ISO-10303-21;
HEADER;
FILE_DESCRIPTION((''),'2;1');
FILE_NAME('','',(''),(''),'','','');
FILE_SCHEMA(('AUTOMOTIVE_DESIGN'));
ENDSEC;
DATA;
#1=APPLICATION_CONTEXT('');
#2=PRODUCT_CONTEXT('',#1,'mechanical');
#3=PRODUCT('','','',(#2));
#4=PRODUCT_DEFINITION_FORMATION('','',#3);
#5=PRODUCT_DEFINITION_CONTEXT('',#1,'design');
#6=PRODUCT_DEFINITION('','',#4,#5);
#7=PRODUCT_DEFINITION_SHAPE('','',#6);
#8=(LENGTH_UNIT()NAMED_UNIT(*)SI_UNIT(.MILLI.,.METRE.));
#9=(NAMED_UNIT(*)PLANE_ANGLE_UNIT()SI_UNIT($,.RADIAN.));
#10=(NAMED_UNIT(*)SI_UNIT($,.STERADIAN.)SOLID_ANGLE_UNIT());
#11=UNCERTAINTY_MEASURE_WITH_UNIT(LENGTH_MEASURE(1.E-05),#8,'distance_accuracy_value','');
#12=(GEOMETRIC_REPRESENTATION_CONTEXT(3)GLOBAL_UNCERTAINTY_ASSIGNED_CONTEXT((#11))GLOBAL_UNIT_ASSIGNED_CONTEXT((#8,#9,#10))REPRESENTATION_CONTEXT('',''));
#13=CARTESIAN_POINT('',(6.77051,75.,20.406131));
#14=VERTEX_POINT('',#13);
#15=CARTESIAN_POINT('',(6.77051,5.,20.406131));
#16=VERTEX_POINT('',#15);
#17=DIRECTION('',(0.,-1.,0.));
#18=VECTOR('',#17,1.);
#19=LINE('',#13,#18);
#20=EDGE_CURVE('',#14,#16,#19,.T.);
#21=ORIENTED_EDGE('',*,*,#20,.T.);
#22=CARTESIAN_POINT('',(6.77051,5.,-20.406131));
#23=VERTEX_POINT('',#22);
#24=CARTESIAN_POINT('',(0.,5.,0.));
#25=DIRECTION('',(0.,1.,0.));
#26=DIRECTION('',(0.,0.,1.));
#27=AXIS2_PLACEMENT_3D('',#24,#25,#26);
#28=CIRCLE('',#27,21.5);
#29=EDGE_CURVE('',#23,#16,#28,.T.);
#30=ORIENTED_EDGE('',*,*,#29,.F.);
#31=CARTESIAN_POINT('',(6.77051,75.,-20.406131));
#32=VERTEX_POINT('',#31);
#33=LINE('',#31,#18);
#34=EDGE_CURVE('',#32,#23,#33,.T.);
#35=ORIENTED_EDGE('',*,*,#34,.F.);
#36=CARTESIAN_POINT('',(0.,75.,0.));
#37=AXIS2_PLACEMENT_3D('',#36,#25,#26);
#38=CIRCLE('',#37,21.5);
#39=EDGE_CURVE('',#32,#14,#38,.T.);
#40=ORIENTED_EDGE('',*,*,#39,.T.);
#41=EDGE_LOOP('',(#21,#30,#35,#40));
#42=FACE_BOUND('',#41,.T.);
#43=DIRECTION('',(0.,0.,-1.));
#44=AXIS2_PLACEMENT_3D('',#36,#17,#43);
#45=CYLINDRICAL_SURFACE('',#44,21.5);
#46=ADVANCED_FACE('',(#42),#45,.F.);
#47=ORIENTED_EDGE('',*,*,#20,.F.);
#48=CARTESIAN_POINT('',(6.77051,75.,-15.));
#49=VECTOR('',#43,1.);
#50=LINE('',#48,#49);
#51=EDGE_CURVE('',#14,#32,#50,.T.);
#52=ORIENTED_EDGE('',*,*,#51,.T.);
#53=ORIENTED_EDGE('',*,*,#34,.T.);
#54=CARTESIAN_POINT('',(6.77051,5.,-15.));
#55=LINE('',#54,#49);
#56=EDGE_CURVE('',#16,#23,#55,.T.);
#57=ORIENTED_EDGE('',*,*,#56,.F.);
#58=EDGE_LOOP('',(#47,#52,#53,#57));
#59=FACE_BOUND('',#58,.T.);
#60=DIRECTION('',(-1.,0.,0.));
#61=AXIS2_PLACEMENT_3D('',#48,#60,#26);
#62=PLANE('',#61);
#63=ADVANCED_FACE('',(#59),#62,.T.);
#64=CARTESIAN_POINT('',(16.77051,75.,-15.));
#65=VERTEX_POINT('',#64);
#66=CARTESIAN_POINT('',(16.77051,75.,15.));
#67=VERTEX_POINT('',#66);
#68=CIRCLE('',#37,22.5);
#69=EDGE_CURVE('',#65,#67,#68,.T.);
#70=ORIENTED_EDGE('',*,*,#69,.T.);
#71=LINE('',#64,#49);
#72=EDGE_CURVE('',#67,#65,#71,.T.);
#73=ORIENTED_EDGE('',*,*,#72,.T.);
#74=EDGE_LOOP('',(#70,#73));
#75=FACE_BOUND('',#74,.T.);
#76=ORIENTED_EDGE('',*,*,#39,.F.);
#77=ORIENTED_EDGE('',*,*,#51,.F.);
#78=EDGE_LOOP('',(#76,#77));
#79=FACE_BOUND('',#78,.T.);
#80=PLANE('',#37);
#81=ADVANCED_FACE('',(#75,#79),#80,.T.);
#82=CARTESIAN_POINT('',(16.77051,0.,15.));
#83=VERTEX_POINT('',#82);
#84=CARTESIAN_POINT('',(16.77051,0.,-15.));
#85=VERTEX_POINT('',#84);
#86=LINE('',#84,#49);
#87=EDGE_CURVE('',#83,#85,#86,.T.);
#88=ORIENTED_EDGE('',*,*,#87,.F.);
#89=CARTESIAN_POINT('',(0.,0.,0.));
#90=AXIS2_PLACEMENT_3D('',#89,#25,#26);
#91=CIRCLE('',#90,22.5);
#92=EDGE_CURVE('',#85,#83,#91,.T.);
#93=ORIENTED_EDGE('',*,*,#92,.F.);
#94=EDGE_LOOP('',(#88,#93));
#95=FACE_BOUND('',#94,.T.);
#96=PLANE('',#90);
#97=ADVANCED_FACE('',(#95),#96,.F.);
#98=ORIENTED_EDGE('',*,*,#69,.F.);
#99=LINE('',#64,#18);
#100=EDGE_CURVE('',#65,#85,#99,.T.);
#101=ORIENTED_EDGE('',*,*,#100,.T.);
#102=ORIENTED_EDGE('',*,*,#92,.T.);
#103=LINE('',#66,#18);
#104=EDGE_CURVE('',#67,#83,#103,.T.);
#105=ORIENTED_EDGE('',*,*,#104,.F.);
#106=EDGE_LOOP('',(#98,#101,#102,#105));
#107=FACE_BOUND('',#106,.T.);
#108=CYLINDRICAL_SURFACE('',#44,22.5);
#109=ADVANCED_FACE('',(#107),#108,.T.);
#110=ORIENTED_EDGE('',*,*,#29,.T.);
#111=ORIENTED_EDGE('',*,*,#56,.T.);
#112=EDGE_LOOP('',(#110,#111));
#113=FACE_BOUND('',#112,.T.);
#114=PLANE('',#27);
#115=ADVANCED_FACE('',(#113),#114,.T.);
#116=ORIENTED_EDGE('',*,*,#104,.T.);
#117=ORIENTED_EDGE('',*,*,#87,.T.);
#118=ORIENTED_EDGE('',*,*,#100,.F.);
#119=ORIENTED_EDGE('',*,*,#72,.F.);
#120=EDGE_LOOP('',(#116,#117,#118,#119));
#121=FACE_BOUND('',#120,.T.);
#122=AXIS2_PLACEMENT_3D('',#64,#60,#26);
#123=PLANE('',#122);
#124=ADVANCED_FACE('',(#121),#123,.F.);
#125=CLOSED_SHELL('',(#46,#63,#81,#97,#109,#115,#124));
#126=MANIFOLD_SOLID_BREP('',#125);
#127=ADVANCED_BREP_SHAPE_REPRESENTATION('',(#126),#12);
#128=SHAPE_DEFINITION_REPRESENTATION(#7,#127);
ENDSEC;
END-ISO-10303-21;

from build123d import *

# Parameters (mm, degrees)
BOSS_EXTRUDE1_DEPTH = 75
SHELL4_START        = 5
SHELL4_DEPTH        = 70


# Read off the part's stored shape, not the designer's step: Shell4
with BuildPart() as part:
    # Sketch1 → Boss-Extrude1 (new body)
    with BuildSketch(Plane(origin=(0, 0, 0), x_dir=(1, 0, 0), z_dir=(0, 1, 0))):
        with BuildLine():
            Line((16.770509831, 15), (16.770509831, -15))
            ThreePointArc((16.770509831, -15), (-22.5, 0), (16.770509831, 15))
        make_face()
    extrude(amount=BOSS_EXTRUDE1_DEPTH)

    # Shell4 outline → Shell4 (cut)
    with BuildSketch(Plane(origin=(0, 0, 0), x_dir=(1, 0, 0), z_dir=(0, 1, 0)).offset(SHELL4_START)):
        with BuildLine():
            ThreePointArc((6.770509831, 20.406131349), (-21.5, 0), (6.770509831, -20.406131349))
            Line((6.770509831, -20.406131349), (6.770509831, 20.406131349))
        make_face()
    extrude(amount=SHELL4_DEPTH, mode=Mode.SUBTRACT)


solid = part.part
